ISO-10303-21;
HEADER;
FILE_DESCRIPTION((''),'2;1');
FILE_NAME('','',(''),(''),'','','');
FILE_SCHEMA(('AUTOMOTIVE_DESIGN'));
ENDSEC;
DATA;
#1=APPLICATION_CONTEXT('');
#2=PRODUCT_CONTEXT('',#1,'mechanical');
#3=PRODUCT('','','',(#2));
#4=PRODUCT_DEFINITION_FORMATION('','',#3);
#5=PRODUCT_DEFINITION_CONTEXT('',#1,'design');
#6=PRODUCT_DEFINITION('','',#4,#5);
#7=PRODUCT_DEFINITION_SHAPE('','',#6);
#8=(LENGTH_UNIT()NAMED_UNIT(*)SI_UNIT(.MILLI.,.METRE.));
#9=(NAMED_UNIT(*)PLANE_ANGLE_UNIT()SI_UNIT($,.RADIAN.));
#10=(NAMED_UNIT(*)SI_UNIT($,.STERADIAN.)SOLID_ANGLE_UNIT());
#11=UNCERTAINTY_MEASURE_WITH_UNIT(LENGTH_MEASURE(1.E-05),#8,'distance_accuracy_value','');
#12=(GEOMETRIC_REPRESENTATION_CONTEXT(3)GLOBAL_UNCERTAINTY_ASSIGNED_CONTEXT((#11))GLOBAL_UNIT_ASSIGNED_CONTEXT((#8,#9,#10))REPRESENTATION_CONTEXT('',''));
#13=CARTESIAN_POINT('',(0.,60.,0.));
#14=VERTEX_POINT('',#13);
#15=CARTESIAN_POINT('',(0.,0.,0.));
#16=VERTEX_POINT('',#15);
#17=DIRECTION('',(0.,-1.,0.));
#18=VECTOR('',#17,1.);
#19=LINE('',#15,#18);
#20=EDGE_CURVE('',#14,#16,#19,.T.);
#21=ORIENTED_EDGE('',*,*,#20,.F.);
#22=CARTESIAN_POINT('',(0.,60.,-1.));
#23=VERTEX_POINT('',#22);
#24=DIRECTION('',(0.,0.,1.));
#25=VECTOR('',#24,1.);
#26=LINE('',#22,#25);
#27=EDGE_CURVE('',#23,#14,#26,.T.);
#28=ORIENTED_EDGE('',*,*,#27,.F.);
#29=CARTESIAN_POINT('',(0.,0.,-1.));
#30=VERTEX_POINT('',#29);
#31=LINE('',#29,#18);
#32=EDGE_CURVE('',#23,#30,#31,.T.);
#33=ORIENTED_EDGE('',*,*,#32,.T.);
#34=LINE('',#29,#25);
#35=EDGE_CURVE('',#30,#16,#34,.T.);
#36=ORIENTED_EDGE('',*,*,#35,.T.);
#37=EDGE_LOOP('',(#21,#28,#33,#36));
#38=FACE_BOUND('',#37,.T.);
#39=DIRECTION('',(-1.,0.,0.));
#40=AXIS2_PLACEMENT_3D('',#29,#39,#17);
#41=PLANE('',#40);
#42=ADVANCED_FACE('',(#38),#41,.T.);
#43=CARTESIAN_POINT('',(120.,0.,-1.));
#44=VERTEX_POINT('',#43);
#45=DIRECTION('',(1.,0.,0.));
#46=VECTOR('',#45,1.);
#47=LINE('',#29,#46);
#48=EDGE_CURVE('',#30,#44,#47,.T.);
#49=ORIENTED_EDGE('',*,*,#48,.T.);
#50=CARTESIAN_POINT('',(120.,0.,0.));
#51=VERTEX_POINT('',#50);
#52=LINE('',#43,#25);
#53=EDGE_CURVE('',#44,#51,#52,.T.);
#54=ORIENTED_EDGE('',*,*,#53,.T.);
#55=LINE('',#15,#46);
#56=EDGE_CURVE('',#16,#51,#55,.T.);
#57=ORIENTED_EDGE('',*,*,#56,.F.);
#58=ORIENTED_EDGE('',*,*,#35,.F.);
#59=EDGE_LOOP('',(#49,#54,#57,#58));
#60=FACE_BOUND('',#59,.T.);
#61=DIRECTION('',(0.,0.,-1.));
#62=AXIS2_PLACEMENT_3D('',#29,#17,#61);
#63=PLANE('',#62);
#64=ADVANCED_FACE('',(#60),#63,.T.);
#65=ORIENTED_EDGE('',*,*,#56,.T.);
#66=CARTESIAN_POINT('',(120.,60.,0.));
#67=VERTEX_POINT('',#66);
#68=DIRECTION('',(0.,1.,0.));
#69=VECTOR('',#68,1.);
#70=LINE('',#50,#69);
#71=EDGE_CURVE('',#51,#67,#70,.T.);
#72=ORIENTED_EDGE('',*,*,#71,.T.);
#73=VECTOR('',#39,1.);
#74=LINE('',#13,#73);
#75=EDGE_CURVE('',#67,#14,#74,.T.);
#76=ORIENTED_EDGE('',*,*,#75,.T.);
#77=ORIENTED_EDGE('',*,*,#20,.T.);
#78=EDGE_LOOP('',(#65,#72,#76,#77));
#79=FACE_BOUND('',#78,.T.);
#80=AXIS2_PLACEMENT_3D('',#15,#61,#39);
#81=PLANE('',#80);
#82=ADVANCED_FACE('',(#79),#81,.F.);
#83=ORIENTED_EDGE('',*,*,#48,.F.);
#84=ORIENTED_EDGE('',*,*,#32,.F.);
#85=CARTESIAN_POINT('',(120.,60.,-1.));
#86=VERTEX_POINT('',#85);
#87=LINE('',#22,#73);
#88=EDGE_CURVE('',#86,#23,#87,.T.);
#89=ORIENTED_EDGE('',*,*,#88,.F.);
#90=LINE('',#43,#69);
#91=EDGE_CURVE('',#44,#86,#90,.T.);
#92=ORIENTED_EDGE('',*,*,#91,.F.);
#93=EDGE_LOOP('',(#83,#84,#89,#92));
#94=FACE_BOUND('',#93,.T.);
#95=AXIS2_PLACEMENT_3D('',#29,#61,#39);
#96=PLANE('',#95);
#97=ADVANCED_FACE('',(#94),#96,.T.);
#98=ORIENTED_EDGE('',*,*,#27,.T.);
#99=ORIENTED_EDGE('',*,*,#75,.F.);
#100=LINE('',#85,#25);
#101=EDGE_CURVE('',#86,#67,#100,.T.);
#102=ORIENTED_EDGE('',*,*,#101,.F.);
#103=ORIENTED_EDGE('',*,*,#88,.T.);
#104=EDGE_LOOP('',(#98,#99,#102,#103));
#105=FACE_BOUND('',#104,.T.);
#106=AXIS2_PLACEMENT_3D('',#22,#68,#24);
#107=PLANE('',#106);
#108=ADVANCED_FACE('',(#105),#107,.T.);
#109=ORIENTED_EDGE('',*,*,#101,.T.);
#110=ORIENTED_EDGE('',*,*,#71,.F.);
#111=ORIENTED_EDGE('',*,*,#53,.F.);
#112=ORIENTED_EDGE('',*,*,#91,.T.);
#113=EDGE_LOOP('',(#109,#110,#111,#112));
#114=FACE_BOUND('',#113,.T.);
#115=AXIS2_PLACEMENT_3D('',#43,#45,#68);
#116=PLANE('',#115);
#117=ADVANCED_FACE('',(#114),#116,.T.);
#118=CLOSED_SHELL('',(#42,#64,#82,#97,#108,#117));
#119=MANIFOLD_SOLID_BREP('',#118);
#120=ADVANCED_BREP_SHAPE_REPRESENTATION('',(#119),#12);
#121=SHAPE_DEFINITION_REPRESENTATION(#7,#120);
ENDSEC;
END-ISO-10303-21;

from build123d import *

# Parameters (mm, degrees)
SKETCH1_W          = 120
SKETCH1_H          = 60
BASE_FLANGE1_DEPTH = 1


# Sheet-metal steps are written as plain solids
with BuildPart() as part:
    # Sketch1 → Base-Flange1 (new body)
    with BuildSketch(Plane.XY):
        with Locations((60, 30)):
            Rectangle(SKETCH1_W, SKETCH1_H)
    extrude(amount=-BASE_FLANGE1_DEPTH)


solid = part.part
